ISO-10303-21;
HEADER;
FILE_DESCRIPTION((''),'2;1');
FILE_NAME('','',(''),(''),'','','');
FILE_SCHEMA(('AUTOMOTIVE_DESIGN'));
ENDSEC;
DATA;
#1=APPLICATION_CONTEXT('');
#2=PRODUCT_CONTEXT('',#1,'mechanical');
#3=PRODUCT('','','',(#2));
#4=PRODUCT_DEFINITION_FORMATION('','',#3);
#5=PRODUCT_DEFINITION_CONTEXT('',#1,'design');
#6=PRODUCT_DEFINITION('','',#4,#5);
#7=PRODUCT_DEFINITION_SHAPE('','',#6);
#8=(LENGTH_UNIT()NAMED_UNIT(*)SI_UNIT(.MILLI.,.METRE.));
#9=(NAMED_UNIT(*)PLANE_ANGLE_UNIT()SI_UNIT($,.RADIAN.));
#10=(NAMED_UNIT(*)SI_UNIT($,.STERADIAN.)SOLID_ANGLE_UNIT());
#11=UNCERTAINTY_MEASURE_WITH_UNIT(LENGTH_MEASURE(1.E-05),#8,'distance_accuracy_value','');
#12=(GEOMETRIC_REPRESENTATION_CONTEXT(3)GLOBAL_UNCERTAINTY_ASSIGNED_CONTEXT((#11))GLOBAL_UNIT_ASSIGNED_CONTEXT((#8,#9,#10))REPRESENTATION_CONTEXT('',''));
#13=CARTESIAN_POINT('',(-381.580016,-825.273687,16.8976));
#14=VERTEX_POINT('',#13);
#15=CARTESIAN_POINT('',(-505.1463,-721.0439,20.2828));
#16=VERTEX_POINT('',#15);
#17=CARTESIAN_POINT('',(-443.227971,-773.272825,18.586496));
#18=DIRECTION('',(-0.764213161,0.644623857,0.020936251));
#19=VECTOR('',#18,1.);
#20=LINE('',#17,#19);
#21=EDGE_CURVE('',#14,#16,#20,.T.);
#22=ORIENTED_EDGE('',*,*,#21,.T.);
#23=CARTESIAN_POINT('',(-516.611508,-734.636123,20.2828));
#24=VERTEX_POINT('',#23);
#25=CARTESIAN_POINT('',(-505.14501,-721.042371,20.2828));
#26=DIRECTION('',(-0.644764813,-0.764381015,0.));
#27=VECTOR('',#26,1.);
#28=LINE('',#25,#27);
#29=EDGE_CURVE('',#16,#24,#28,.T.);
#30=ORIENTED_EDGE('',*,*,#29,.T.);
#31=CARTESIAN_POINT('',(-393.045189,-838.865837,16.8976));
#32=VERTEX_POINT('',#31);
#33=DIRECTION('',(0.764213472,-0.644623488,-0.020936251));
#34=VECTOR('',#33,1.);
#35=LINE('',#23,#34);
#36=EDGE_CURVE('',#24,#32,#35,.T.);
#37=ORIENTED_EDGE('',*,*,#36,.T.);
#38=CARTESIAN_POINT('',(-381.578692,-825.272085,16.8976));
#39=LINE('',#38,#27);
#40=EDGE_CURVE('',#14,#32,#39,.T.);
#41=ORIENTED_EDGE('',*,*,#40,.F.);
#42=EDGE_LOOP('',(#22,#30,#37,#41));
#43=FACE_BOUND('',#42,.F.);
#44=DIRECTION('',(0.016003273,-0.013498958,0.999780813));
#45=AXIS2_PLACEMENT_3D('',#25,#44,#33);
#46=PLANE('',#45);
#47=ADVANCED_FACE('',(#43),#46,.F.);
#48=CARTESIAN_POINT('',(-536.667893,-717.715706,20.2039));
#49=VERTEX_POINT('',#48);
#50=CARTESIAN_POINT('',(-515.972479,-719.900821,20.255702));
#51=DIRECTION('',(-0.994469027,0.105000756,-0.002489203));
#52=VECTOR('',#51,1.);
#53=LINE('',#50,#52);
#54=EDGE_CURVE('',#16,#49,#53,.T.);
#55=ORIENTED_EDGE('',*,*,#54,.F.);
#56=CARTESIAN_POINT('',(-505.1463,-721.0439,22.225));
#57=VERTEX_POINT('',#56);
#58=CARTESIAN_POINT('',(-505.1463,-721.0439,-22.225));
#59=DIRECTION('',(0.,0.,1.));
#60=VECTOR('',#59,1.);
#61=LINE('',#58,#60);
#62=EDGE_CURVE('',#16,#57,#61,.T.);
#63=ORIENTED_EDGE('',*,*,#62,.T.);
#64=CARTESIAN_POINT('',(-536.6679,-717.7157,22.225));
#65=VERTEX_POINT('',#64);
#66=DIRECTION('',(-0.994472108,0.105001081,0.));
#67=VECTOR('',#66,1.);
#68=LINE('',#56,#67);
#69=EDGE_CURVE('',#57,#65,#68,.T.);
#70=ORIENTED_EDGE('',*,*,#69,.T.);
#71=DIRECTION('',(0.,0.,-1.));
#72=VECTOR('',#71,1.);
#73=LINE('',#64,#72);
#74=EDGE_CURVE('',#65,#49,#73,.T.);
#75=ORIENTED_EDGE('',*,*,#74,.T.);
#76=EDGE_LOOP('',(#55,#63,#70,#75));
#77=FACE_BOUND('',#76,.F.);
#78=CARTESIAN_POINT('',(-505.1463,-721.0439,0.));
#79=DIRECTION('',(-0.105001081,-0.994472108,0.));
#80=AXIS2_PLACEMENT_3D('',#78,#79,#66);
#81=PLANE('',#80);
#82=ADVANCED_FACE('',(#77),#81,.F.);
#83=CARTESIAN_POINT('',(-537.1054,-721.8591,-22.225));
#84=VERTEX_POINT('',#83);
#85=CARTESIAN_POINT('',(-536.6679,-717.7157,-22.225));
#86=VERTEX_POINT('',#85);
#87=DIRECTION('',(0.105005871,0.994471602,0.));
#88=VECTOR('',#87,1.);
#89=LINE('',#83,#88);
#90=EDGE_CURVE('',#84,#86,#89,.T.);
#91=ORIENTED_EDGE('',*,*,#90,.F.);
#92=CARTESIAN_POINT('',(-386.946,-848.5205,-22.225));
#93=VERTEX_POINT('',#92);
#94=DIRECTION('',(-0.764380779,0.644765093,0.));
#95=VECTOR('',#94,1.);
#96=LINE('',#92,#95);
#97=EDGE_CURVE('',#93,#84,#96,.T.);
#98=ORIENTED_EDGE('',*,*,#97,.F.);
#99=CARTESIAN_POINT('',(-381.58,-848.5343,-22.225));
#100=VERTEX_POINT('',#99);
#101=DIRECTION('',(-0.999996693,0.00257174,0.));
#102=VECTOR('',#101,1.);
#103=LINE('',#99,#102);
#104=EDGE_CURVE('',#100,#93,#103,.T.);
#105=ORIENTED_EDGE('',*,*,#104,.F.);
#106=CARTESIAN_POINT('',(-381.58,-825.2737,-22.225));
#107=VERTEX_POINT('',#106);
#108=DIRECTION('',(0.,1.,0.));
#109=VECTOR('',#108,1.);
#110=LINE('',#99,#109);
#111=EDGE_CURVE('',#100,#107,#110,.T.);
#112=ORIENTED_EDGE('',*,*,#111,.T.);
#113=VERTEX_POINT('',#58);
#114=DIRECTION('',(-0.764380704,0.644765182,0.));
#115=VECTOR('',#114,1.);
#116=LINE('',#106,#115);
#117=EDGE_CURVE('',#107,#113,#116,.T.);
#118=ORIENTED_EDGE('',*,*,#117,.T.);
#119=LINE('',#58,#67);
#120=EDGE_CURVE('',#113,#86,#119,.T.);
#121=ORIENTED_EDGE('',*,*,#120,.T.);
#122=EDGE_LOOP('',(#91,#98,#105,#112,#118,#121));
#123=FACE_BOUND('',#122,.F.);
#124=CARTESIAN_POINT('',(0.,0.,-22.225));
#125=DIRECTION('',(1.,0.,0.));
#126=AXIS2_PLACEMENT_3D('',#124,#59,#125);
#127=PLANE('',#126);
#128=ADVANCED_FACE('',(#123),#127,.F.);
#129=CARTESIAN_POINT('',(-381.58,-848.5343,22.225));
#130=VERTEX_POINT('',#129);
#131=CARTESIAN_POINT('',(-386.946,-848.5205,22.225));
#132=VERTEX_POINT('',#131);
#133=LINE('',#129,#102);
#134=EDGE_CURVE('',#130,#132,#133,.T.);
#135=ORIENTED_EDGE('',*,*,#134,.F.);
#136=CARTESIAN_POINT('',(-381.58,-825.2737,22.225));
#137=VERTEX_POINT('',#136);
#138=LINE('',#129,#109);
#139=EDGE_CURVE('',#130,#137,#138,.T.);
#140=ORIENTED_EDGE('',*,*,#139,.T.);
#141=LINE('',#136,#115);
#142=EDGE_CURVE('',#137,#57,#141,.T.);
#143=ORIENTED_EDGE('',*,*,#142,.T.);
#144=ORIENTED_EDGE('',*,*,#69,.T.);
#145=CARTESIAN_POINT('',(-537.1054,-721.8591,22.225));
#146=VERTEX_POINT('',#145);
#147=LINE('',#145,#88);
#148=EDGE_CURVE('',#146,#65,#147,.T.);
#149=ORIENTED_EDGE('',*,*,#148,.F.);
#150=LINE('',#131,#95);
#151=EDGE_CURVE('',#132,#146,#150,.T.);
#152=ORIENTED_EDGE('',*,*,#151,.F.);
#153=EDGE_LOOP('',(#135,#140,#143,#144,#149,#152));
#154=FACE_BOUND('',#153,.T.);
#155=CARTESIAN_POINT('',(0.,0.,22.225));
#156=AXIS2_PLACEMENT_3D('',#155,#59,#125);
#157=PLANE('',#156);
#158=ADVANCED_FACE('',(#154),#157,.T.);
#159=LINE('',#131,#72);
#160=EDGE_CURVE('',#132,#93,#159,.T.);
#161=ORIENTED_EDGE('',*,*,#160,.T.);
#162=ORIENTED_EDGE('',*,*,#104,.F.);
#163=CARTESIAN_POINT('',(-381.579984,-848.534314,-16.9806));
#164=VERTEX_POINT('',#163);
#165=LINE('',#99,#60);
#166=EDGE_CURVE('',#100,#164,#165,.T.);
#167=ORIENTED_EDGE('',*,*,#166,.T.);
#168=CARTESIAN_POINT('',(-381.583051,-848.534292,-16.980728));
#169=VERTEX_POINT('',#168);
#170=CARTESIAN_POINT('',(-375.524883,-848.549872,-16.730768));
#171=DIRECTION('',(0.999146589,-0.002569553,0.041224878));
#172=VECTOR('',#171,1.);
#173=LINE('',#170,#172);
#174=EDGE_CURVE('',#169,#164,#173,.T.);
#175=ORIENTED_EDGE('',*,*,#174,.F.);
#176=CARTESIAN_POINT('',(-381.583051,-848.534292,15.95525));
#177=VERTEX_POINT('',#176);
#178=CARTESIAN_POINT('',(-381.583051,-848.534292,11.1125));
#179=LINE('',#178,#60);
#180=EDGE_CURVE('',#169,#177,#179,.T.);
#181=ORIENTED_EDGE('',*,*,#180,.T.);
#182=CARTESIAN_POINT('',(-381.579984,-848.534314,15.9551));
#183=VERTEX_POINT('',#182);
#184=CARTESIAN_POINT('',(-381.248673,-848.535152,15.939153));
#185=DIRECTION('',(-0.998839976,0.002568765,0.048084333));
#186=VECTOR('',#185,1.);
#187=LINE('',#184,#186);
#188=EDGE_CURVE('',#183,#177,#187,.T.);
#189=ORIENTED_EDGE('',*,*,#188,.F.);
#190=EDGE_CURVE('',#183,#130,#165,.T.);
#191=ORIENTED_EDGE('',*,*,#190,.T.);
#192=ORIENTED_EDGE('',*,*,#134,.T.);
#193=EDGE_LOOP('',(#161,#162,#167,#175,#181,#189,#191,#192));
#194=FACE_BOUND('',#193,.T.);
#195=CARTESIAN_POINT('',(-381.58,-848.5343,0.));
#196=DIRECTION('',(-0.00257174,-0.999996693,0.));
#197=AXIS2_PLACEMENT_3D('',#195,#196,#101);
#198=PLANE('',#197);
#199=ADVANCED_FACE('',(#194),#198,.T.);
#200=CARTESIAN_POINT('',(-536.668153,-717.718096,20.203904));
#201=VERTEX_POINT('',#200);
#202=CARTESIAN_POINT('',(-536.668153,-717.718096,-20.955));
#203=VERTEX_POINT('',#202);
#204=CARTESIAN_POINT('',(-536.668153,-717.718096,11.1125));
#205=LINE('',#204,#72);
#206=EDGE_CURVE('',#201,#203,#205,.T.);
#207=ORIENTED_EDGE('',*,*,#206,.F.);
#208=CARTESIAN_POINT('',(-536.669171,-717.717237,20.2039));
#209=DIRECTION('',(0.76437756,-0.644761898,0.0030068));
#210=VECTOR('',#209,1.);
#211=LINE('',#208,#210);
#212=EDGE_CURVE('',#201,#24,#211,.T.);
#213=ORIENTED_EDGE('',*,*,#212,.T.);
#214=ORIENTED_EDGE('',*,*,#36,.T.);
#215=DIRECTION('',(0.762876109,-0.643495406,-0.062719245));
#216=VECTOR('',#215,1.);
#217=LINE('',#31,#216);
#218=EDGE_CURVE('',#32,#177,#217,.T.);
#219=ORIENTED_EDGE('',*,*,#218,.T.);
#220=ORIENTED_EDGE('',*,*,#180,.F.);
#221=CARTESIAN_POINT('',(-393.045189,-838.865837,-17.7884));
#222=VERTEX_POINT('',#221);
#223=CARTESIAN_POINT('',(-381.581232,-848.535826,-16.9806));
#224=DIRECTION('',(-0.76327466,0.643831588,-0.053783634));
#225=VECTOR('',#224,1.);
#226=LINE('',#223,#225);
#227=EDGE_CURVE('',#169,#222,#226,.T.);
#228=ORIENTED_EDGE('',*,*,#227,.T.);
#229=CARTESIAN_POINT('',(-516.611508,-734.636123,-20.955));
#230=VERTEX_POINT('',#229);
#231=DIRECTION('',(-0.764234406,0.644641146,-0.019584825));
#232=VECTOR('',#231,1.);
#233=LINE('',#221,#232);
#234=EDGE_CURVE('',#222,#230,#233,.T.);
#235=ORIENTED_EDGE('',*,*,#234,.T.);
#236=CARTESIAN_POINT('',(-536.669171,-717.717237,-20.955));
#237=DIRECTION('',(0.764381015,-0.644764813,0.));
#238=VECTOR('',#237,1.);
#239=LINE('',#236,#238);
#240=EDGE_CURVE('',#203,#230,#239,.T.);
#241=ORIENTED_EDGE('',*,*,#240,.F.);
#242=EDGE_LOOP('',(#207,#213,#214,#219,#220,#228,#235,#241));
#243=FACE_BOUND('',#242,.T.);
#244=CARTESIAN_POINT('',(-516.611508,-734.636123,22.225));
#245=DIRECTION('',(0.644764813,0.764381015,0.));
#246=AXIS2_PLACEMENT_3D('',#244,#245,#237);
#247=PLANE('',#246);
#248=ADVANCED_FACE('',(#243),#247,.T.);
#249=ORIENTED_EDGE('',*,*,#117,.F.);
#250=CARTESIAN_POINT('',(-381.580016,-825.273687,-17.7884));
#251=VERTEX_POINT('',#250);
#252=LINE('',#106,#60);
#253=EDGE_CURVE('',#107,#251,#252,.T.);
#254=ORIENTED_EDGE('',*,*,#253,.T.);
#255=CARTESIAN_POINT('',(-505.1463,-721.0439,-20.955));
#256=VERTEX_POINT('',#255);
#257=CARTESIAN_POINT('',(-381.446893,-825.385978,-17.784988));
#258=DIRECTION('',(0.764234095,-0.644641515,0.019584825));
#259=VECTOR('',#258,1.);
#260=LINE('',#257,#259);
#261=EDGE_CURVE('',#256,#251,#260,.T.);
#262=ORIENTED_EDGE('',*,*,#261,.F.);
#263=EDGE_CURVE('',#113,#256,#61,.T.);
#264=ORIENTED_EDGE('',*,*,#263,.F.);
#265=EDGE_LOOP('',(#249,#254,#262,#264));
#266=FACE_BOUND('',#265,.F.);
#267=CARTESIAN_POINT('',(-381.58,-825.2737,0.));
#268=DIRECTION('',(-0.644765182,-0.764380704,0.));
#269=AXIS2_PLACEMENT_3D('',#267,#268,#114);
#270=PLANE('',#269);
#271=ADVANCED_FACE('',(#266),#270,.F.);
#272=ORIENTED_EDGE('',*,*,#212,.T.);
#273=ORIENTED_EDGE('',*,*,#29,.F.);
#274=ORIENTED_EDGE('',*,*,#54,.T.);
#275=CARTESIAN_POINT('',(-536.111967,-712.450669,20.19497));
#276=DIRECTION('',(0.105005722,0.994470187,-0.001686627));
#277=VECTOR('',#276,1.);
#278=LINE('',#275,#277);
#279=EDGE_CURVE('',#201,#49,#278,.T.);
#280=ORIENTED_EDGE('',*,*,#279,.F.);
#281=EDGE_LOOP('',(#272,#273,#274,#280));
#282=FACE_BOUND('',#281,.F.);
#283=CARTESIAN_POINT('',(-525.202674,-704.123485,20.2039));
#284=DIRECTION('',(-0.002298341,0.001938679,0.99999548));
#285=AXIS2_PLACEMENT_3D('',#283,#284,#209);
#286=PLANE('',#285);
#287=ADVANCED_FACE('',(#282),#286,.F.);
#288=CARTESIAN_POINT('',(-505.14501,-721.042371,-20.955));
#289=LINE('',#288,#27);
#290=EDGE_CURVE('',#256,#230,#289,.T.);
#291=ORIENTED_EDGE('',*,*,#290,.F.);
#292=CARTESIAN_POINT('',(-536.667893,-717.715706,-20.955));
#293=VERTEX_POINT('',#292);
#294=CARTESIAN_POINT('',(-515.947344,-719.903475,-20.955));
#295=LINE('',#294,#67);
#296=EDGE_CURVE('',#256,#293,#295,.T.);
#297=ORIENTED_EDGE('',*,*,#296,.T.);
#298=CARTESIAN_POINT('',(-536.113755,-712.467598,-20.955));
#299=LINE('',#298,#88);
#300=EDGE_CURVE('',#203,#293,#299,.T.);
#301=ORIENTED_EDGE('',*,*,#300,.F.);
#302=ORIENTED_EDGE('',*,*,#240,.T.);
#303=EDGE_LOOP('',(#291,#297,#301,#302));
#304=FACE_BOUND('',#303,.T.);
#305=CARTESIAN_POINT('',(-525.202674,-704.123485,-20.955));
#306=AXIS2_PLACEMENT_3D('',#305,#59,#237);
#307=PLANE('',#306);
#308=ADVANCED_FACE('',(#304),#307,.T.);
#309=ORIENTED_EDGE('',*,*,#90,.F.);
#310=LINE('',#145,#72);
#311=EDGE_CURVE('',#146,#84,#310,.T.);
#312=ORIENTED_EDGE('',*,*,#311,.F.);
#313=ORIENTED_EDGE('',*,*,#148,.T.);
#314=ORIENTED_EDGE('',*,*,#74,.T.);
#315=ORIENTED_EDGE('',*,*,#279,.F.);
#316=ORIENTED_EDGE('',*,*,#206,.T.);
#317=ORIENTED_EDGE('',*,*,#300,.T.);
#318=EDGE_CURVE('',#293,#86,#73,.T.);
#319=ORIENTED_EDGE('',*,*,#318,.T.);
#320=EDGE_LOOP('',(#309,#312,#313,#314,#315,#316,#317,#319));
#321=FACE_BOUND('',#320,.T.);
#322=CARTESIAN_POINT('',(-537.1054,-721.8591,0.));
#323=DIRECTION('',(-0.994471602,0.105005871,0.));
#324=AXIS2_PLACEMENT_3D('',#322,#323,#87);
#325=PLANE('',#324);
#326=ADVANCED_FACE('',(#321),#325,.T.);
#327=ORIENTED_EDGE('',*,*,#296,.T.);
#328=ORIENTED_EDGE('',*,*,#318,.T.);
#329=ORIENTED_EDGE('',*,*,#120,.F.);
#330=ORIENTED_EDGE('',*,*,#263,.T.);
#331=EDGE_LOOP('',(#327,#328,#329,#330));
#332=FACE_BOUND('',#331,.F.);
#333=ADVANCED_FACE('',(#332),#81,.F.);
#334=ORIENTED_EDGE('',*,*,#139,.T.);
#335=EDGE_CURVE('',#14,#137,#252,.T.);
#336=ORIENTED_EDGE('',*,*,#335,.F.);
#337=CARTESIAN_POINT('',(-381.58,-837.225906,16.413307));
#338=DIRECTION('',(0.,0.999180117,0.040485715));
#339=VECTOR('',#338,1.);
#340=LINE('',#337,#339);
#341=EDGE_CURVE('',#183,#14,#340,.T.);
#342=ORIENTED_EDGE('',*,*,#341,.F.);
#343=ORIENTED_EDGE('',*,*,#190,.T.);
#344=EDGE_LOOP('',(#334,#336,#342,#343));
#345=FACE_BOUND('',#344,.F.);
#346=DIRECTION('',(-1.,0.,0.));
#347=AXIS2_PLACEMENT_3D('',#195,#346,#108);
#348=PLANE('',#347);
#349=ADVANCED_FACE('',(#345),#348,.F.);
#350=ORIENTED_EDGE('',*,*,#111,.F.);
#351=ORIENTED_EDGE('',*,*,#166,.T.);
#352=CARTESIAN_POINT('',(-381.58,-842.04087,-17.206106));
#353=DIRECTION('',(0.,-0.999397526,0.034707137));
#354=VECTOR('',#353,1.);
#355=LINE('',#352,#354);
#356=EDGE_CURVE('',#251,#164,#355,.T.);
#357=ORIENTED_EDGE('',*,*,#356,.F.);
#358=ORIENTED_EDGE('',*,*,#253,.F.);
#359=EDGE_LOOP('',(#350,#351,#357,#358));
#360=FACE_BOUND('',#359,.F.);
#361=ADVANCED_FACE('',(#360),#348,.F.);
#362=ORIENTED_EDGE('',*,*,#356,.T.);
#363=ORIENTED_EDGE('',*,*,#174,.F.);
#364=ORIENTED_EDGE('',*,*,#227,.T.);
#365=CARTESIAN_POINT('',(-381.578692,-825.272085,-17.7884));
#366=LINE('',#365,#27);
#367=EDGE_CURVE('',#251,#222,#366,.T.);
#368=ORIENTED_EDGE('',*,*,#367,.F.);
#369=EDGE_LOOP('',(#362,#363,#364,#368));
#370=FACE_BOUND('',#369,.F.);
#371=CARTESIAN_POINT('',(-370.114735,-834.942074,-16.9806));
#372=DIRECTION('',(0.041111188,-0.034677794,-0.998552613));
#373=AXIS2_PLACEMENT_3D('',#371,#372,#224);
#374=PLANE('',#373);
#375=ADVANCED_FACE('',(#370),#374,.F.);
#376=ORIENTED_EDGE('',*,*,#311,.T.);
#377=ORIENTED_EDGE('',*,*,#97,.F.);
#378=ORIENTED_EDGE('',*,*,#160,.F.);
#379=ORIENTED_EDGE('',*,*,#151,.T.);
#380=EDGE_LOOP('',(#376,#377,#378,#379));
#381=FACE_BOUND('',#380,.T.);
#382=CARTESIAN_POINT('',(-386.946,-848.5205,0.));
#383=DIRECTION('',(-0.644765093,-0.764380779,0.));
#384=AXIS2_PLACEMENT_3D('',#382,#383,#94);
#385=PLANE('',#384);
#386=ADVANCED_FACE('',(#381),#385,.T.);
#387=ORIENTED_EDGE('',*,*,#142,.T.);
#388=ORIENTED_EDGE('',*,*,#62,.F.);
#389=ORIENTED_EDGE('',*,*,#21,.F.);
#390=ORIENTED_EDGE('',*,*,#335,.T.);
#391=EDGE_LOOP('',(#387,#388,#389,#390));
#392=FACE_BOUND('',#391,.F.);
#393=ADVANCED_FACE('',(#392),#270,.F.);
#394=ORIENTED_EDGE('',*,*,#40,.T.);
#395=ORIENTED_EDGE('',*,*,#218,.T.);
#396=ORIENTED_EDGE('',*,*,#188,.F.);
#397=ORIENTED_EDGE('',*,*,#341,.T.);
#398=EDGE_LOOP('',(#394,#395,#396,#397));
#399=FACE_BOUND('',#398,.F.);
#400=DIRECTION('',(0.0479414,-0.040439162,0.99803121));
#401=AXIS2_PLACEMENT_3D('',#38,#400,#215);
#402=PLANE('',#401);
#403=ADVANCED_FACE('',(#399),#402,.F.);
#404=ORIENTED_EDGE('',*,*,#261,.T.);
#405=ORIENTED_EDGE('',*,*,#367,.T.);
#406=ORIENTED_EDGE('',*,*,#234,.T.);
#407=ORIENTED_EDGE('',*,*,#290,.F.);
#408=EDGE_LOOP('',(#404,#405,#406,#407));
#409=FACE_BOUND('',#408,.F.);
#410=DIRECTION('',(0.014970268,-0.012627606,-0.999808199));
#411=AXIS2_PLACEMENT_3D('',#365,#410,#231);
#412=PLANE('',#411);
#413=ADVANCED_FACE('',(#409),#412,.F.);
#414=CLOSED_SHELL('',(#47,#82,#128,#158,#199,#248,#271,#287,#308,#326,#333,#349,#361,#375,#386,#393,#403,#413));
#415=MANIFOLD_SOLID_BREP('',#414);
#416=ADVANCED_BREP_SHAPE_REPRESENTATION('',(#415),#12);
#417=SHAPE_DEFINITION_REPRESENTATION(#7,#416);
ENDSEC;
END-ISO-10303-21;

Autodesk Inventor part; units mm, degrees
ref_plane "YZ Plane" through (0, 0, 0) normal (1, 0, 0) x (0, 1, 0)
ref_plane "XZ Plane" through (0, 0, 0) normal (0, 1, 0) x (-1, 0, 0)
sketch "Sketch1" plane through (0, 0, 0) normal (0, 0, 1) x (1, 0, 0)
  line L0 (-381.58, -848.5343) -> (-381.58, -825.2737)
  line L1 (-381.58, -825.2737) -> (-505.1463, -721.0439)
  line L2 (-505.1463, -721.0439) -> (-536.6679, -717.7157)
  line L3 (-381.58, -848.5343) -> (-386.946, -848.5205)
  line L4 (-386.946, -848.5205) -> (-537.1054, -721.8591)
  line L5 (-537.1054, -721.8591) -> (-536.6679, -717.7157)
  line L6 (-381.58, -848.5343) -> (-536.6679, -717.7157) construction
  point P0 (0, 0)
extrude "Extrusion1" add sketch "Sketch1" along normal mid plane 44.45
sketch "Sketch2" plane through (-505.1463, -721.0439, 22.225) normal (0.6447648, 0.764381, 0) x (0.764381, -0.6447648, 0)
  line L0 (0, 1.9422) -> (161.6554, 5.3274) projected
  line L1 (161.6554, 40.0134) -> (0, 43.18) projected
  line L2 (161.6554, 5.3274) -> (176.6531, 6.2699) projected
  line L3 (176.6531, 39.2056) -> (161.6554, 40.0134) projected
  line L4 (-26.2404, 2.0211) -> (0, 1.9422) projected
  line L5 (-26.2404, 43.18) -> (0, 43.18) projected
  line L6 (176.6531, 6.2699) -> (176.6531, 39.2056)
  line L7 (176.6531, 44.45) -> (176.6531, 0) projected
  line L8 (-26.2404, 2.0211) -> (-26.2404, 43.18)
  point P0 (-78.7795, 22.225)
ref_plane "Work Plane1" through (-511.6606, -738.8097, -32.3222) normal (-0.6447648, -0.764381, 0) x (0.764381, -0.6447648, 0)
extrude "Extrusion2" cut sketch "Sketch2" against normal up to surface (17.78 mm away)
properties part number "TopGrip"
